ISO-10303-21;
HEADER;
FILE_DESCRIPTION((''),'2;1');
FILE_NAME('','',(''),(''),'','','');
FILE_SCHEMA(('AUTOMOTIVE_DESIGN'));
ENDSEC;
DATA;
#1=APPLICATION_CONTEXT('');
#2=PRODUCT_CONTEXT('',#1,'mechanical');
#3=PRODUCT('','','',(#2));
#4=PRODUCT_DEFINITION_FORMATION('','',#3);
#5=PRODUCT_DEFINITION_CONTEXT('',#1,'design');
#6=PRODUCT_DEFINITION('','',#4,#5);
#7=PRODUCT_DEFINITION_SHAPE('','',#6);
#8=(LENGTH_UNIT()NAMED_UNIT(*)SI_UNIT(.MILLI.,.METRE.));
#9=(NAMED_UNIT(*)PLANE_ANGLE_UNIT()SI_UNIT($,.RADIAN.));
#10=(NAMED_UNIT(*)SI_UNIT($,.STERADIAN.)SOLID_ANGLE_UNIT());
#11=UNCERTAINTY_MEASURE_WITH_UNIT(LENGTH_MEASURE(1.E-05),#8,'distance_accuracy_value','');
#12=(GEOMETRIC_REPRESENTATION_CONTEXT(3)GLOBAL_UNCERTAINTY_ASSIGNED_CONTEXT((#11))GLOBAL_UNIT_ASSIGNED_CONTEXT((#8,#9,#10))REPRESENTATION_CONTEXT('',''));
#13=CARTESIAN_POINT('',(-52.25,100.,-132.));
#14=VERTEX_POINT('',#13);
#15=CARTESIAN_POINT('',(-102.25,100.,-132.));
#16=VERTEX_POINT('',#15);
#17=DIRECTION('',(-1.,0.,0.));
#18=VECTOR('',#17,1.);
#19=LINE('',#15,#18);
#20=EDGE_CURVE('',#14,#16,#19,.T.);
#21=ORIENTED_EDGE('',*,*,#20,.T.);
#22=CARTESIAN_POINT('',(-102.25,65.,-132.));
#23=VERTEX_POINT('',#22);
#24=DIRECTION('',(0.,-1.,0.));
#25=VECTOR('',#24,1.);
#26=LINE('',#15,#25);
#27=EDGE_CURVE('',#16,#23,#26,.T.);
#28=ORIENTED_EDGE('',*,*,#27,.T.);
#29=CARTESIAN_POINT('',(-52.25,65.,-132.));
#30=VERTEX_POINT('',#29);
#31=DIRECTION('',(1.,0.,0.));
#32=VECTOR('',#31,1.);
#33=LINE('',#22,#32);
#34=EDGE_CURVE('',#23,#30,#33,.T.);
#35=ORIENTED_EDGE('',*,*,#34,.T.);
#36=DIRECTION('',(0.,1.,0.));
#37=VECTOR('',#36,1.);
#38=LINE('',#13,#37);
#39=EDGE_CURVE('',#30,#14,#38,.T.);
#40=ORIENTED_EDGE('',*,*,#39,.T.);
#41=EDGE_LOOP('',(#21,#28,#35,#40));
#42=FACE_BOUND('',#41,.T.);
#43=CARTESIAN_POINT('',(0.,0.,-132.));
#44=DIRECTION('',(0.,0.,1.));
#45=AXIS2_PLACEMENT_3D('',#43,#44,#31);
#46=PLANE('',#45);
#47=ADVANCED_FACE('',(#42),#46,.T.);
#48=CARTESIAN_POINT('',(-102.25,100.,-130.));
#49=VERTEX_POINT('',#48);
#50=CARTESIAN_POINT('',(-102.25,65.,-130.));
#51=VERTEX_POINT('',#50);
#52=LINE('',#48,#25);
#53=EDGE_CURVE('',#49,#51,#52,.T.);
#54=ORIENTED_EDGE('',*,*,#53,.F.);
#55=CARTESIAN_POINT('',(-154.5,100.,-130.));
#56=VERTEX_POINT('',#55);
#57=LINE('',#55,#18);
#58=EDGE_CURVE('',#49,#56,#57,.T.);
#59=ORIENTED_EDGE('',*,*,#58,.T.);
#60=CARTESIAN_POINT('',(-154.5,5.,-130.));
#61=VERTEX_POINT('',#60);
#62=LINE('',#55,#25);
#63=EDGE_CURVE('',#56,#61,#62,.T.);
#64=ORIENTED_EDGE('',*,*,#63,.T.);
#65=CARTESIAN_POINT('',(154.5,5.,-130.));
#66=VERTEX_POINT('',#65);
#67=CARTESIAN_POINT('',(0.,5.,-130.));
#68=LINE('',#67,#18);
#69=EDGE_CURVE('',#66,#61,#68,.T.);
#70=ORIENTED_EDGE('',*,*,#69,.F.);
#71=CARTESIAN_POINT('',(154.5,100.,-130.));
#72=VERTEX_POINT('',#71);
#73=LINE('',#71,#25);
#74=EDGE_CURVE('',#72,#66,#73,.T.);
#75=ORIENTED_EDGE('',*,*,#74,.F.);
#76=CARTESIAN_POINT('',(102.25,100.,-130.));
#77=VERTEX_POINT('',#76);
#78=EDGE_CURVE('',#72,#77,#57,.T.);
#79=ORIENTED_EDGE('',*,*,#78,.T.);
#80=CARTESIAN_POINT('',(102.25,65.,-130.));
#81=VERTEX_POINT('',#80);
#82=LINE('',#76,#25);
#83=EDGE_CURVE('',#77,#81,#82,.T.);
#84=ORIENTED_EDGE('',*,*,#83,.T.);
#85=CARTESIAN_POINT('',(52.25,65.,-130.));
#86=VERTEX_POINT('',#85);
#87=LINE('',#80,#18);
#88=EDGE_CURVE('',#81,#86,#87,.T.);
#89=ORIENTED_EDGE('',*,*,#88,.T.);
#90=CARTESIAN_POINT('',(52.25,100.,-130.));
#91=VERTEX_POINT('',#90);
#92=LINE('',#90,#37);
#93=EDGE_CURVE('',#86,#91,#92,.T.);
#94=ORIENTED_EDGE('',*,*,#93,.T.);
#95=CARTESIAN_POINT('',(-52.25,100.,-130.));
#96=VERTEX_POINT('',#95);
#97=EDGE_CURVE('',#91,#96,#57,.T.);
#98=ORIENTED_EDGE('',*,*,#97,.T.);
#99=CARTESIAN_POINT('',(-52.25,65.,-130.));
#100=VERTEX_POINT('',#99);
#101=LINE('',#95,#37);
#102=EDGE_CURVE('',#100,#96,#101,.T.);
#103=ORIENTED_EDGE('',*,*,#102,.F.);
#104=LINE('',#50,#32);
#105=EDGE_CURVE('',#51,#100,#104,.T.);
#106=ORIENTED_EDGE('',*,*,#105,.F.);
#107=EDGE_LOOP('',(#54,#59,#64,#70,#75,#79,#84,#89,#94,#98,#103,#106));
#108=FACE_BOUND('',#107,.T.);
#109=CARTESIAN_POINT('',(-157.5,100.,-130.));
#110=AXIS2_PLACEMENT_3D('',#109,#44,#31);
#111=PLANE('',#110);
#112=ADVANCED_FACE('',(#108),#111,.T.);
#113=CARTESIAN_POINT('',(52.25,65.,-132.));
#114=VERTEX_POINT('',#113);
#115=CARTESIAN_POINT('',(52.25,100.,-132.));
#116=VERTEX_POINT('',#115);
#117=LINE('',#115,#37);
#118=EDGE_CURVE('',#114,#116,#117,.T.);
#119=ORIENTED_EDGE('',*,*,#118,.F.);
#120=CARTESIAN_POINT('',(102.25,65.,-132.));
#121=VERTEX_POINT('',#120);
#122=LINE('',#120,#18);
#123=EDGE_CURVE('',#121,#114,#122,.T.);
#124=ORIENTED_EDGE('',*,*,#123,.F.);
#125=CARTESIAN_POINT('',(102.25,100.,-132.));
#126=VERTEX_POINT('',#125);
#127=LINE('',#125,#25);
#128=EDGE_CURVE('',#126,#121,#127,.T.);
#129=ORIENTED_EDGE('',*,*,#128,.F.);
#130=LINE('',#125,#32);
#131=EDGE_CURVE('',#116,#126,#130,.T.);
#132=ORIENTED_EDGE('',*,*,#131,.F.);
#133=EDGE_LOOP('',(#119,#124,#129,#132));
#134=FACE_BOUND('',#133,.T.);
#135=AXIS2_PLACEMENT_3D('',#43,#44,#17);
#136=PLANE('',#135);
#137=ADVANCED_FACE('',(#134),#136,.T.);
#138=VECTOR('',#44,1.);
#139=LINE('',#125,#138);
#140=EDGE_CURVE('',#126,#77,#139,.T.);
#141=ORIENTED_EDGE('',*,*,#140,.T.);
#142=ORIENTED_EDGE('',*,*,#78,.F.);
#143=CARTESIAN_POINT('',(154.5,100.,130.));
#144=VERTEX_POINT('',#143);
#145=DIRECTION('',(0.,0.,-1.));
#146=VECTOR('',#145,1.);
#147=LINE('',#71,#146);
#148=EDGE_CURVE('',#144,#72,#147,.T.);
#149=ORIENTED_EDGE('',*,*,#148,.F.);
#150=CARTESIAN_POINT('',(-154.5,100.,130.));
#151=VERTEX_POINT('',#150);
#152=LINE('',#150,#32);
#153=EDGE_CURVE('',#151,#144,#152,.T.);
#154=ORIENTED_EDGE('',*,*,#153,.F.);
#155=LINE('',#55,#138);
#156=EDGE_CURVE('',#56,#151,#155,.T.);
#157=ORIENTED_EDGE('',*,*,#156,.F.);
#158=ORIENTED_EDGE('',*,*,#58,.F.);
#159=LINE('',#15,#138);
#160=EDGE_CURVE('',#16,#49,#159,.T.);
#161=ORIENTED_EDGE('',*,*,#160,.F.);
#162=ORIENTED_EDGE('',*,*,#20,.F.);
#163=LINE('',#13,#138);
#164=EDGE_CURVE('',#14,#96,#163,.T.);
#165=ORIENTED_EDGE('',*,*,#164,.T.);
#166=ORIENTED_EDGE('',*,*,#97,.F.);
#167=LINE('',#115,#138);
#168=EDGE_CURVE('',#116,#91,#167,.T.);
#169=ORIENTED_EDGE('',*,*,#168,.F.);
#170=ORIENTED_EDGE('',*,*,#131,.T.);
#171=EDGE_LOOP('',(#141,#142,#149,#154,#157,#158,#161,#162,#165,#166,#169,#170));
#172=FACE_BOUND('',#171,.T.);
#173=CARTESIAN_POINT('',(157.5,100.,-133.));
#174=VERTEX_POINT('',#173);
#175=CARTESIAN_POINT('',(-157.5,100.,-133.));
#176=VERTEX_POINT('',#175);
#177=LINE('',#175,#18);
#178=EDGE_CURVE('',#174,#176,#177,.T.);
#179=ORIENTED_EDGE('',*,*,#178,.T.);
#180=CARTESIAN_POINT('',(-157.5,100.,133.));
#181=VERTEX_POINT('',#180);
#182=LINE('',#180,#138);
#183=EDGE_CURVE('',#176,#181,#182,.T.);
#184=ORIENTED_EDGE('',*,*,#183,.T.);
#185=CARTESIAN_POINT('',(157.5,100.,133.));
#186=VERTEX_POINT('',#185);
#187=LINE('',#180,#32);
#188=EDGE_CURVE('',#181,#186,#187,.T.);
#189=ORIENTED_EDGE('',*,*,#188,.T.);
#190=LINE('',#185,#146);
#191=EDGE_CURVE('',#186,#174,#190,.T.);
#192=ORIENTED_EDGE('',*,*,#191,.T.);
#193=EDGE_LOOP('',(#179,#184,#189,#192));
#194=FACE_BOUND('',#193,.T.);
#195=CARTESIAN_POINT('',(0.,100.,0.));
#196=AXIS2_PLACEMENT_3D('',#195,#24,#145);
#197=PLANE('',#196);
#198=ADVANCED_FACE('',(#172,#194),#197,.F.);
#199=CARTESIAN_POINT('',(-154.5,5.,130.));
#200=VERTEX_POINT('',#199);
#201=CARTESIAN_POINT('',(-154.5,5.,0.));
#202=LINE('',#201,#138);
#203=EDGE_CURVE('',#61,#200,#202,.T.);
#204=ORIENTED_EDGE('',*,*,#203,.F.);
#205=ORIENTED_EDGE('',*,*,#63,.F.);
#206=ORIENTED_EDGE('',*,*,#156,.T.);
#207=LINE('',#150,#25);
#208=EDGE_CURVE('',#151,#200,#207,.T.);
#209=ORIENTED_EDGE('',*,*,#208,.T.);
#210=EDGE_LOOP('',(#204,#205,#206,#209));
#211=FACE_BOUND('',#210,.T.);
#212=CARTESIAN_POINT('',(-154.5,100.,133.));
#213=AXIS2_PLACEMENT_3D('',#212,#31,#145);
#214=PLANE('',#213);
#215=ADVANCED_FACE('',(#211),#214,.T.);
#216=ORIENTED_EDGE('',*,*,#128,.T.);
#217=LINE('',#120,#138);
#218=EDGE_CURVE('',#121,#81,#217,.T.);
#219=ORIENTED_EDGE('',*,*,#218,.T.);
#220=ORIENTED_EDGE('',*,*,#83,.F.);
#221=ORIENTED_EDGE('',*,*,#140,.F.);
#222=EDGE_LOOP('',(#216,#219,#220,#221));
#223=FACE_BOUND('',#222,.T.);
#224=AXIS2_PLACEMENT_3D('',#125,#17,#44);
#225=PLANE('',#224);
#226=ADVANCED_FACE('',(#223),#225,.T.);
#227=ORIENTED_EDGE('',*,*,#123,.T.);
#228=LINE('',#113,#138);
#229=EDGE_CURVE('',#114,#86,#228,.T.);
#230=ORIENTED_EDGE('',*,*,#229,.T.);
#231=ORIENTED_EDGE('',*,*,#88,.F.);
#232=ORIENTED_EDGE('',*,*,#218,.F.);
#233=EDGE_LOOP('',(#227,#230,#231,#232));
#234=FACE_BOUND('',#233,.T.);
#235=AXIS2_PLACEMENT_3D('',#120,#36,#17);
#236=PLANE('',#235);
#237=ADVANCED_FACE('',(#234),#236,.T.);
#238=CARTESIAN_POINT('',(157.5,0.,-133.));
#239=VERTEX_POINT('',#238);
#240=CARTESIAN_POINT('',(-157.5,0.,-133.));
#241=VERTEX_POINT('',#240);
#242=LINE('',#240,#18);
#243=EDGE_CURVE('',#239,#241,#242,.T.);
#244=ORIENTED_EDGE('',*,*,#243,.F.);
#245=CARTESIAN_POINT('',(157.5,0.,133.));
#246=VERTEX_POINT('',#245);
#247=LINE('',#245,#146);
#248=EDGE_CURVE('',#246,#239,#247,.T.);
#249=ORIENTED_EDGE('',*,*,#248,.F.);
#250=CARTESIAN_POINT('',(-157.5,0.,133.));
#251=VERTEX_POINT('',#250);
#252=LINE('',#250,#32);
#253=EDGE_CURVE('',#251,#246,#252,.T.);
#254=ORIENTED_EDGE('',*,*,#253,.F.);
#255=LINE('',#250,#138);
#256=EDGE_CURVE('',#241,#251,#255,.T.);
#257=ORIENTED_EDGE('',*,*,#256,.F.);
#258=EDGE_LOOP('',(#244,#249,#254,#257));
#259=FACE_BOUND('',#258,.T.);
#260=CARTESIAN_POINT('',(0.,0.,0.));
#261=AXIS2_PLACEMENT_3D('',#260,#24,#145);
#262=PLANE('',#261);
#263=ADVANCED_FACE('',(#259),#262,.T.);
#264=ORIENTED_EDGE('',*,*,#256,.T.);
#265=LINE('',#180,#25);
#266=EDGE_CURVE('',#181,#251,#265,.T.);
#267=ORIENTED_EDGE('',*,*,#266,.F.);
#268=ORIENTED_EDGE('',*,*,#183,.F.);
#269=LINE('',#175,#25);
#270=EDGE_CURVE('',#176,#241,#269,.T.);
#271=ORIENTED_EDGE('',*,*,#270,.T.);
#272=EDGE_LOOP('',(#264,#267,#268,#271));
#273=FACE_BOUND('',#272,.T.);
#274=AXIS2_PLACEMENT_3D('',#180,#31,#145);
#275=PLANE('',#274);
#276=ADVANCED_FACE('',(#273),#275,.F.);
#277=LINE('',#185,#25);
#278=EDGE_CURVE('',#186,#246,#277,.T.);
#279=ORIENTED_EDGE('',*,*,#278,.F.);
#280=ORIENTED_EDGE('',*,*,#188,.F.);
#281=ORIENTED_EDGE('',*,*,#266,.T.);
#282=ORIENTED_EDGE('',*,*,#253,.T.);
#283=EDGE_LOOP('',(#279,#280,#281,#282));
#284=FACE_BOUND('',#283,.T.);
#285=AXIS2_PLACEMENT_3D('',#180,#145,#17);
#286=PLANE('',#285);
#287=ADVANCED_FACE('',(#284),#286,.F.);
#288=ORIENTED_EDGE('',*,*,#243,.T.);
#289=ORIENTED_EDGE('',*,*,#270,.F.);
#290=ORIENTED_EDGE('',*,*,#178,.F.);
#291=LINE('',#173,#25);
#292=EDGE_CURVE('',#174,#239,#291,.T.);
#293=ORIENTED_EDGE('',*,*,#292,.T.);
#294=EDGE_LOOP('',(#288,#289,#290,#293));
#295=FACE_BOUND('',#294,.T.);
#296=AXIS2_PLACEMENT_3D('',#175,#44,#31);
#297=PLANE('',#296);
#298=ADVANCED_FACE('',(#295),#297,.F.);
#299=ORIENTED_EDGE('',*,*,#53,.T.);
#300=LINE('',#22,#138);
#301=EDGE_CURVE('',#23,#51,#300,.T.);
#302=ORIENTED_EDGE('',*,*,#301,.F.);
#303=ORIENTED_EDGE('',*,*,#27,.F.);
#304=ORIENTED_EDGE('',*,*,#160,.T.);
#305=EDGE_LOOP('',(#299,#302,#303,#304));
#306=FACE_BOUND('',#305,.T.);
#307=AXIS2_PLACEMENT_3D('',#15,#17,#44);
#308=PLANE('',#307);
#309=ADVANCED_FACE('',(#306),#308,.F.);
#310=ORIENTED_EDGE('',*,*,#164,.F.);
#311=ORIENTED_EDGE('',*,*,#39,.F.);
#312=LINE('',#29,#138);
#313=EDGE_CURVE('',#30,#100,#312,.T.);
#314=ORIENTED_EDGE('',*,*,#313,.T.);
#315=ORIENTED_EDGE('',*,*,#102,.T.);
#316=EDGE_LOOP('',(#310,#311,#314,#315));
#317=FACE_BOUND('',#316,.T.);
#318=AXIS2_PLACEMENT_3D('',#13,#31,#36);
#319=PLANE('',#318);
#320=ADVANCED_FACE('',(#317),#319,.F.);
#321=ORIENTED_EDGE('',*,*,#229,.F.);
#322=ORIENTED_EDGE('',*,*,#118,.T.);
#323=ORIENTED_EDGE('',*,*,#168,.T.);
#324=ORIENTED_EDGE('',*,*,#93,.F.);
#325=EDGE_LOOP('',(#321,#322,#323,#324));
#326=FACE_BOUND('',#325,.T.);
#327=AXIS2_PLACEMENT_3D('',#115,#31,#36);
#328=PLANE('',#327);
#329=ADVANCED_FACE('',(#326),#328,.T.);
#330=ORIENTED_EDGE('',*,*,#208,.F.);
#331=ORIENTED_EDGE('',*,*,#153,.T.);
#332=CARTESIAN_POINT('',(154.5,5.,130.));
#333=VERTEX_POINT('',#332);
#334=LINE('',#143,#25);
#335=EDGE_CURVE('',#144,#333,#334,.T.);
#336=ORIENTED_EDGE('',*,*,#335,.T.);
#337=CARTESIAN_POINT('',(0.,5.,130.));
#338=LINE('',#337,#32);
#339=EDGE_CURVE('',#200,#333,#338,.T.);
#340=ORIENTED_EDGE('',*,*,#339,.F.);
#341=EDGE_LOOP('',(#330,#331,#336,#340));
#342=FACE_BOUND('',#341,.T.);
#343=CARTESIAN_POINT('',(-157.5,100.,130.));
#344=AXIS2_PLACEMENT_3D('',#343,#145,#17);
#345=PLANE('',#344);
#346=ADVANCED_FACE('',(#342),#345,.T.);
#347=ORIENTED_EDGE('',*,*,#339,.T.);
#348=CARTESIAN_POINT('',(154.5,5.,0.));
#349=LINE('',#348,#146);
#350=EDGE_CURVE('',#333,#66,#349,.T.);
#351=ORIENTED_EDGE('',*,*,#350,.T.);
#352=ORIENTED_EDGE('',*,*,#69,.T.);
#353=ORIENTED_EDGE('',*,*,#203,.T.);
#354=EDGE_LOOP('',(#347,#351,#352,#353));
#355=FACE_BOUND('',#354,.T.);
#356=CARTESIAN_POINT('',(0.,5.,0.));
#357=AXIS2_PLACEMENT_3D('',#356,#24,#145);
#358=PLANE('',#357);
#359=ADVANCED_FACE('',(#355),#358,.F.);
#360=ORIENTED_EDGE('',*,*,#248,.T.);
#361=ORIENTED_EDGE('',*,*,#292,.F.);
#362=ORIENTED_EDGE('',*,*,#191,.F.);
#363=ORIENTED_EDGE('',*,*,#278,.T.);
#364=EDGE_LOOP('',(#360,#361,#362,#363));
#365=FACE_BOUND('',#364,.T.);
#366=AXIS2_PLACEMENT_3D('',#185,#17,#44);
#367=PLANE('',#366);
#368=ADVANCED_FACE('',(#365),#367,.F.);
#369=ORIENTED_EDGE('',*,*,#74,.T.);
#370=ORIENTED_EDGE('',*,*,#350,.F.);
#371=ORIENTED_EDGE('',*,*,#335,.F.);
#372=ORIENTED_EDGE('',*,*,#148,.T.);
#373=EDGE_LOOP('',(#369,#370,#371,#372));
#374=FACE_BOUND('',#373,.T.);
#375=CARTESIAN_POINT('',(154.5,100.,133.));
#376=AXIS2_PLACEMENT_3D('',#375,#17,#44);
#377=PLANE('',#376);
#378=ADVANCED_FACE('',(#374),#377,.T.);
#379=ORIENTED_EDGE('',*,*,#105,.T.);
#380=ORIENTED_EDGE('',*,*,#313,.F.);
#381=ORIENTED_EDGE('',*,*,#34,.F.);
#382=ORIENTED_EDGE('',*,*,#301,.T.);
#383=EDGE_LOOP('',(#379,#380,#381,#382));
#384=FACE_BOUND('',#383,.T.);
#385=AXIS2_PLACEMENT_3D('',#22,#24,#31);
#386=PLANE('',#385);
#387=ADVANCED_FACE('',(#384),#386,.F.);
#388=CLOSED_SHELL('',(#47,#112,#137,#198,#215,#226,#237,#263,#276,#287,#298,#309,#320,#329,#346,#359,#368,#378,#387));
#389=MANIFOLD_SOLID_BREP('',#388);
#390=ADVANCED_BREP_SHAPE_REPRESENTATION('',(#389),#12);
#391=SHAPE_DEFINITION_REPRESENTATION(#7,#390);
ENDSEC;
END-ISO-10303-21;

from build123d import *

# Parameters (mm, degrees)
SKETCH1_W           = 315
SKETCH1_H           = 266
BOSS_EXTRUDE1_DEPTH = 100
SHELL1_START        = -154.5
SHELL1_OUTLINE_W    = 92
SHELL1_OUTLINE_H    = 260
SHELL1_DEPTH        = 309
SKETCH2_W           = 309
SKETCH2_H           = 260
CUT_EXTRUDE1_DEPTH  = 3
SKETCH5_W           = 50
SKETCH5_H           = 35
CUT_EXTRUDE3_DEPTH  = 2


# Read off the part's stored shape, not the designer's step: Shell1
with BuildPart() as part:
    # Sketch1 → Boss-Extrude1 (new body)
    with BuildSketch(Plane(origin=(0, 0, 0), x_dir=(1, 0, 0), z_dir=(0, 1, 0))):
        Rectangle(SKETCH1_W, SKETCH1_H)
    extrude(amount=BOSS_EXTRUDE1_DEPTH)

    # Shell1 outline → Shell1 (cut)
    with BuildSketch(Plane.YZ.offset(SHELL1_START)):
        with Locations((51, 0)):
            Rectangle(SHELL1_OUTLINE_W, SHELL1_OUTLINE_H)
    extrude(amount=SHELL1_DEPTH, mode=Mode.SUBTRACT)

    # Sketch2 → Cut-Extrude1 (cut)
    with BuildSketch(Plane(origin=(0, 100, 0), x_dir=(1, 0, 0), z_dir=(0, 1, 0))):
        Rectangle(SKETCH2_W, SKETCH2_H)
    extrude(amount=-CUT_EXTRUDE1_DEPTH, mode=Mode.SUBTRACT)

    # Sketch5 → Cut-Extrude3 (cut)
    with BuildSketch(Plane.XY.offset(-130)):
        with Locations((-77.25, 82.5)):
            Rectangle(SKETCH5_W, SKETCH5_H)
    cut_extrude3 = extrude(amount=-CUT_EXTRUDE3_DEPTH, mode=Mode.SUBTRACT)

    # Mirror1: Cut-Extrude3 across plane
    add(cut_extrude3.mirror(Plane(origin=(0, 0, 0), x_dir=(0, 0, 1), z_dir=(1, 0, 0))), mode=Mode.SUBTRACT)


solid = part.part
